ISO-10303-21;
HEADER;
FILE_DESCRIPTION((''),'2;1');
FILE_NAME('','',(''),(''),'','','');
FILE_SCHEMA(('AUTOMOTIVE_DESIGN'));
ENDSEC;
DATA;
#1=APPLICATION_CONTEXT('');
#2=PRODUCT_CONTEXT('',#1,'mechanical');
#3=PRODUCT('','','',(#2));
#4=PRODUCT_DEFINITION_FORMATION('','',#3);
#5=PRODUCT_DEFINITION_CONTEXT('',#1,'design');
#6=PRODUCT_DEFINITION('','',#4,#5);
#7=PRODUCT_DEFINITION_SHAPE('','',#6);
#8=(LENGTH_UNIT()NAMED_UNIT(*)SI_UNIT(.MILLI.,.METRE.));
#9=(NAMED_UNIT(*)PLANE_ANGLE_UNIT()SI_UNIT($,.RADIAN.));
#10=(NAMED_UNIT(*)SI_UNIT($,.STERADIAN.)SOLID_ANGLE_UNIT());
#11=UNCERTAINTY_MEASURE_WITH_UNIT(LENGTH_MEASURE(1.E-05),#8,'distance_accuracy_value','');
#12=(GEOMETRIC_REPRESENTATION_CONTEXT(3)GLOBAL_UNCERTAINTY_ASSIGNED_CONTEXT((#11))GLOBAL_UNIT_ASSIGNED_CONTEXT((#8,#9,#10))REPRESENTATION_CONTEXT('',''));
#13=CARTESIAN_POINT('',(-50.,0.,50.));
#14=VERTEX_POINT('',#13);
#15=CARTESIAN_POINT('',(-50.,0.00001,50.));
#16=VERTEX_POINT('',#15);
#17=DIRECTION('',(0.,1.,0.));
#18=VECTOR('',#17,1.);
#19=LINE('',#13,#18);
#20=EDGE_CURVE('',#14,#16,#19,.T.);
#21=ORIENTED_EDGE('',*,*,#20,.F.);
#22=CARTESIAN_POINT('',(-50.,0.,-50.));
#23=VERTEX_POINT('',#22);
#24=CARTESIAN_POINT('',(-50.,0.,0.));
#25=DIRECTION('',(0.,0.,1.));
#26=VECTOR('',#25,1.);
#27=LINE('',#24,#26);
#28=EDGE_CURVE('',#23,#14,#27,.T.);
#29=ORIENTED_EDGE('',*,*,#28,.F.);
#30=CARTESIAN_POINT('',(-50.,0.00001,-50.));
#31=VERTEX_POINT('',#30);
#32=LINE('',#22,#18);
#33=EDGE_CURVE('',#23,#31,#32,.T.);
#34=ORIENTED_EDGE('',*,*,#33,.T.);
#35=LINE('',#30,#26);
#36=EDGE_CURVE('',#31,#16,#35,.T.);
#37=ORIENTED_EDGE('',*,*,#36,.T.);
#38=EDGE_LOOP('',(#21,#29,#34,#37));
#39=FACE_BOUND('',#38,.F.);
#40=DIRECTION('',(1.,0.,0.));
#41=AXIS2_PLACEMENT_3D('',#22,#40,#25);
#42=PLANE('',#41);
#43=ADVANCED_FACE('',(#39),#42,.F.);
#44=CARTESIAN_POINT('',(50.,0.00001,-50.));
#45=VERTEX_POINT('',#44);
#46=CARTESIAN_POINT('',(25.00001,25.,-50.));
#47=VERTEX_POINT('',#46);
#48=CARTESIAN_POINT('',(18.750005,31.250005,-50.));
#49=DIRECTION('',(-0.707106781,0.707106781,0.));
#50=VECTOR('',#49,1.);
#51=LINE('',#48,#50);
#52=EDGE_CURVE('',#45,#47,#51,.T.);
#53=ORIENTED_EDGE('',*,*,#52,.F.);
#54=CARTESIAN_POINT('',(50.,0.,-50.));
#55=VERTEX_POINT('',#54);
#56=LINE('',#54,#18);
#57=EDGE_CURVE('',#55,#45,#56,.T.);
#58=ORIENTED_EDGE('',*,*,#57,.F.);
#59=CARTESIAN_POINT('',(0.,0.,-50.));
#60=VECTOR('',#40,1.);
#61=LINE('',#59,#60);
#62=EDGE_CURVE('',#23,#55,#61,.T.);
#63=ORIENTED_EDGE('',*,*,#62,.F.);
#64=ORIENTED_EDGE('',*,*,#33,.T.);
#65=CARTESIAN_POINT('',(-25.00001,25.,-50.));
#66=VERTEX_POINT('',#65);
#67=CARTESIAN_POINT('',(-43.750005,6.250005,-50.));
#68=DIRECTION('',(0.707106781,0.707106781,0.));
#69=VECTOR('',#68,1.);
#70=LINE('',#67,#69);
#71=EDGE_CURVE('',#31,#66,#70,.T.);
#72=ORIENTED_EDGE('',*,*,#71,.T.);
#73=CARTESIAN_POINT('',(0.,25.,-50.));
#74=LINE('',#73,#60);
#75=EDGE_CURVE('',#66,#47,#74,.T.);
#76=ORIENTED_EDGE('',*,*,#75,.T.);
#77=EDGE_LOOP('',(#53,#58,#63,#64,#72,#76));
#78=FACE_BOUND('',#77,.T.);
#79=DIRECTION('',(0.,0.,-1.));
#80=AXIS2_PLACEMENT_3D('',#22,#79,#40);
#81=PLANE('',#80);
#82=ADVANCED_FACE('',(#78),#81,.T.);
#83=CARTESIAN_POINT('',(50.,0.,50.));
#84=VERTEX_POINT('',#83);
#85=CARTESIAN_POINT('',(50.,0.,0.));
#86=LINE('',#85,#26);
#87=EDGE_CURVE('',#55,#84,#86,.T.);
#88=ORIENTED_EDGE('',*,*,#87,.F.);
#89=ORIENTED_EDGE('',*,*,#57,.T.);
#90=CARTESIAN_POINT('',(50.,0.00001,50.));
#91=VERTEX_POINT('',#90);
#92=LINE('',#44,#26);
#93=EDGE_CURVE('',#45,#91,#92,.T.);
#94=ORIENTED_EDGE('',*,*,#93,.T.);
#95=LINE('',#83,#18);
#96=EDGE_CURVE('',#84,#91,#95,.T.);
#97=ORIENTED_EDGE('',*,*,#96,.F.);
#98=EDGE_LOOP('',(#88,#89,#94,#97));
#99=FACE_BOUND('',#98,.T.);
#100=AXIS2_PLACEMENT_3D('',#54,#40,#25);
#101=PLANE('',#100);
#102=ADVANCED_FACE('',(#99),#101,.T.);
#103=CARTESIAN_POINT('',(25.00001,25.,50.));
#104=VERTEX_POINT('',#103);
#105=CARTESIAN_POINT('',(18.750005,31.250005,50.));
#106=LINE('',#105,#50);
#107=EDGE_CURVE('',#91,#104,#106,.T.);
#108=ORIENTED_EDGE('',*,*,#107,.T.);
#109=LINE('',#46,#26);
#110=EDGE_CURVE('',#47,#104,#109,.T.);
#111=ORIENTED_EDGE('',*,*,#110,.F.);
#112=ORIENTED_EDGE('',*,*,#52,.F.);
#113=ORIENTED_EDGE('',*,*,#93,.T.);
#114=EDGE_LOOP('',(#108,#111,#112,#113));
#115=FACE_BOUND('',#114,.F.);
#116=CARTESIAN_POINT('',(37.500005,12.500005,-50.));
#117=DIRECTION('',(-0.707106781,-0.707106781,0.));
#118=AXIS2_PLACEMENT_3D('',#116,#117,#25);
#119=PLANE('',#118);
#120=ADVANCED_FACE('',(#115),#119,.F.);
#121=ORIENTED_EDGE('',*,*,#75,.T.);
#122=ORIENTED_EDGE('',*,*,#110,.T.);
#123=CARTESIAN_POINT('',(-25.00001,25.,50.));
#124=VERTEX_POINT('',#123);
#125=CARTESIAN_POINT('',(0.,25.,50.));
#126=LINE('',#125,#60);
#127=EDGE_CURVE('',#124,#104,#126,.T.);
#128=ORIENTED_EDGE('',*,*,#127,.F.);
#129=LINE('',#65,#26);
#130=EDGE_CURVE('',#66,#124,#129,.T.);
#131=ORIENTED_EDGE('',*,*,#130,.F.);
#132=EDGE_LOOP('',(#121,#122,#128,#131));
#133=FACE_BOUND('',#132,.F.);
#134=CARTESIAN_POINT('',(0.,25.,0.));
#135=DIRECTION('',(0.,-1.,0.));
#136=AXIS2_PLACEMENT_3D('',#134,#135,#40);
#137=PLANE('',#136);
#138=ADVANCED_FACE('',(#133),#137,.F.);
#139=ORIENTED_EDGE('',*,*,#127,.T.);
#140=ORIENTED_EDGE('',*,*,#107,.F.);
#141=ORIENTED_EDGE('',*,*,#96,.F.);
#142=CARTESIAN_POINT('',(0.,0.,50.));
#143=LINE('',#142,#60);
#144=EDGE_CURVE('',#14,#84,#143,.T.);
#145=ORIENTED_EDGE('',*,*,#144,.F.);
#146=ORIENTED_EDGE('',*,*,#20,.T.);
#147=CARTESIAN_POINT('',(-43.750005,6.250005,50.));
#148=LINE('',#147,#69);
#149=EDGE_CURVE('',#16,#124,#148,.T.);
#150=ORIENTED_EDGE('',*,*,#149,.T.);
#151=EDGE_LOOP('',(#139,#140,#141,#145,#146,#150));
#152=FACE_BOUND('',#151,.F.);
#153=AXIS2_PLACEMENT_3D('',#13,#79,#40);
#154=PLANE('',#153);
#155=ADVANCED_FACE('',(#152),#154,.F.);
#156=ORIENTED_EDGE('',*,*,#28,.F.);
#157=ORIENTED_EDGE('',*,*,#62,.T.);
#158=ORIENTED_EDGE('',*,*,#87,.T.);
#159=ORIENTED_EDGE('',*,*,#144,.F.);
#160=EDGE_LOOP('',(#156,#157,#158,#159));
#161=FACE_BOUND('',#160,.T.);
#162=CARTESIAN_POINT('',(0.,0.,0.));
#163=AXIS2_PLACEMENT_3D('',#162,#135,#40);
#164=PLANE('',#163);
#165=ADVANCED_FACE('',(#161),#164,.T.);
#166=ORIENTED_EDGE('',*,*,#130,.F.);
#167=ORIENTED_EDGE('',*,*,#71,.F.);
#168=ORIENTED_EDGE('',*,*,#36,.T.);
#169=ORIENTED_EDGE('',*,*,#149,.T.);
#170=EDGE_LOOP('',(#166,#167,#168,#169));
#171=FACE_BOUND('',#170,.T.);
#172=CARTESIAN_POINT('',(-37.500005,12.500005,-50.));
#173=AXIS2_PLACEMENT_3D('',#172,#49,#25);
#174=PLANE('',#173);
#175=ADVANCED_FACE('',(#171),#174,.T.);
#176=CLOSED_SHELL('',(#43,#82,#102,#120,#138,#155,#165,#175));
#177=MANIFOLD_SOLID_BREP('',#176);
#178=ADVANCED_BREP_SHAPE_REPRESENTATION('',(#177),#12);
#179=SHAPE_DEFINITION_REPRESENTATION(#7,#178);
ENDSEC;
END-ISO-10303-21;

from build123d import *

# Parameters (mm, degrees)
F0_W     = 100
F0_H     = 100
F1_DEPTH = 25
F2_SIZE  = 24.99999


# Not quite as in the source:
# - a fillet or chamfer is up to 0.001 mm smaller than in the source, because OpenCascade refuses the exact size


with BuildPart() as f1:
    # F0 (on Front) → F1 (new body)
    with BuildSketch(Plane.XZ):
        Rectangle(F0_W, F0_H)
    extrude(amount=-F1_DEPTH)

    # F2 (size 25 in the source; OpenCascade refuses exactly that, so slightly less here)
    f2_edges = [f1.edges().sort_by_distance(p)[0] for p in [
        (50, 25, 0),
        (-50, 25, 0),
    ]]
    chamfer(f2_edges, length=F2_SIZE)


solid = f1.part
